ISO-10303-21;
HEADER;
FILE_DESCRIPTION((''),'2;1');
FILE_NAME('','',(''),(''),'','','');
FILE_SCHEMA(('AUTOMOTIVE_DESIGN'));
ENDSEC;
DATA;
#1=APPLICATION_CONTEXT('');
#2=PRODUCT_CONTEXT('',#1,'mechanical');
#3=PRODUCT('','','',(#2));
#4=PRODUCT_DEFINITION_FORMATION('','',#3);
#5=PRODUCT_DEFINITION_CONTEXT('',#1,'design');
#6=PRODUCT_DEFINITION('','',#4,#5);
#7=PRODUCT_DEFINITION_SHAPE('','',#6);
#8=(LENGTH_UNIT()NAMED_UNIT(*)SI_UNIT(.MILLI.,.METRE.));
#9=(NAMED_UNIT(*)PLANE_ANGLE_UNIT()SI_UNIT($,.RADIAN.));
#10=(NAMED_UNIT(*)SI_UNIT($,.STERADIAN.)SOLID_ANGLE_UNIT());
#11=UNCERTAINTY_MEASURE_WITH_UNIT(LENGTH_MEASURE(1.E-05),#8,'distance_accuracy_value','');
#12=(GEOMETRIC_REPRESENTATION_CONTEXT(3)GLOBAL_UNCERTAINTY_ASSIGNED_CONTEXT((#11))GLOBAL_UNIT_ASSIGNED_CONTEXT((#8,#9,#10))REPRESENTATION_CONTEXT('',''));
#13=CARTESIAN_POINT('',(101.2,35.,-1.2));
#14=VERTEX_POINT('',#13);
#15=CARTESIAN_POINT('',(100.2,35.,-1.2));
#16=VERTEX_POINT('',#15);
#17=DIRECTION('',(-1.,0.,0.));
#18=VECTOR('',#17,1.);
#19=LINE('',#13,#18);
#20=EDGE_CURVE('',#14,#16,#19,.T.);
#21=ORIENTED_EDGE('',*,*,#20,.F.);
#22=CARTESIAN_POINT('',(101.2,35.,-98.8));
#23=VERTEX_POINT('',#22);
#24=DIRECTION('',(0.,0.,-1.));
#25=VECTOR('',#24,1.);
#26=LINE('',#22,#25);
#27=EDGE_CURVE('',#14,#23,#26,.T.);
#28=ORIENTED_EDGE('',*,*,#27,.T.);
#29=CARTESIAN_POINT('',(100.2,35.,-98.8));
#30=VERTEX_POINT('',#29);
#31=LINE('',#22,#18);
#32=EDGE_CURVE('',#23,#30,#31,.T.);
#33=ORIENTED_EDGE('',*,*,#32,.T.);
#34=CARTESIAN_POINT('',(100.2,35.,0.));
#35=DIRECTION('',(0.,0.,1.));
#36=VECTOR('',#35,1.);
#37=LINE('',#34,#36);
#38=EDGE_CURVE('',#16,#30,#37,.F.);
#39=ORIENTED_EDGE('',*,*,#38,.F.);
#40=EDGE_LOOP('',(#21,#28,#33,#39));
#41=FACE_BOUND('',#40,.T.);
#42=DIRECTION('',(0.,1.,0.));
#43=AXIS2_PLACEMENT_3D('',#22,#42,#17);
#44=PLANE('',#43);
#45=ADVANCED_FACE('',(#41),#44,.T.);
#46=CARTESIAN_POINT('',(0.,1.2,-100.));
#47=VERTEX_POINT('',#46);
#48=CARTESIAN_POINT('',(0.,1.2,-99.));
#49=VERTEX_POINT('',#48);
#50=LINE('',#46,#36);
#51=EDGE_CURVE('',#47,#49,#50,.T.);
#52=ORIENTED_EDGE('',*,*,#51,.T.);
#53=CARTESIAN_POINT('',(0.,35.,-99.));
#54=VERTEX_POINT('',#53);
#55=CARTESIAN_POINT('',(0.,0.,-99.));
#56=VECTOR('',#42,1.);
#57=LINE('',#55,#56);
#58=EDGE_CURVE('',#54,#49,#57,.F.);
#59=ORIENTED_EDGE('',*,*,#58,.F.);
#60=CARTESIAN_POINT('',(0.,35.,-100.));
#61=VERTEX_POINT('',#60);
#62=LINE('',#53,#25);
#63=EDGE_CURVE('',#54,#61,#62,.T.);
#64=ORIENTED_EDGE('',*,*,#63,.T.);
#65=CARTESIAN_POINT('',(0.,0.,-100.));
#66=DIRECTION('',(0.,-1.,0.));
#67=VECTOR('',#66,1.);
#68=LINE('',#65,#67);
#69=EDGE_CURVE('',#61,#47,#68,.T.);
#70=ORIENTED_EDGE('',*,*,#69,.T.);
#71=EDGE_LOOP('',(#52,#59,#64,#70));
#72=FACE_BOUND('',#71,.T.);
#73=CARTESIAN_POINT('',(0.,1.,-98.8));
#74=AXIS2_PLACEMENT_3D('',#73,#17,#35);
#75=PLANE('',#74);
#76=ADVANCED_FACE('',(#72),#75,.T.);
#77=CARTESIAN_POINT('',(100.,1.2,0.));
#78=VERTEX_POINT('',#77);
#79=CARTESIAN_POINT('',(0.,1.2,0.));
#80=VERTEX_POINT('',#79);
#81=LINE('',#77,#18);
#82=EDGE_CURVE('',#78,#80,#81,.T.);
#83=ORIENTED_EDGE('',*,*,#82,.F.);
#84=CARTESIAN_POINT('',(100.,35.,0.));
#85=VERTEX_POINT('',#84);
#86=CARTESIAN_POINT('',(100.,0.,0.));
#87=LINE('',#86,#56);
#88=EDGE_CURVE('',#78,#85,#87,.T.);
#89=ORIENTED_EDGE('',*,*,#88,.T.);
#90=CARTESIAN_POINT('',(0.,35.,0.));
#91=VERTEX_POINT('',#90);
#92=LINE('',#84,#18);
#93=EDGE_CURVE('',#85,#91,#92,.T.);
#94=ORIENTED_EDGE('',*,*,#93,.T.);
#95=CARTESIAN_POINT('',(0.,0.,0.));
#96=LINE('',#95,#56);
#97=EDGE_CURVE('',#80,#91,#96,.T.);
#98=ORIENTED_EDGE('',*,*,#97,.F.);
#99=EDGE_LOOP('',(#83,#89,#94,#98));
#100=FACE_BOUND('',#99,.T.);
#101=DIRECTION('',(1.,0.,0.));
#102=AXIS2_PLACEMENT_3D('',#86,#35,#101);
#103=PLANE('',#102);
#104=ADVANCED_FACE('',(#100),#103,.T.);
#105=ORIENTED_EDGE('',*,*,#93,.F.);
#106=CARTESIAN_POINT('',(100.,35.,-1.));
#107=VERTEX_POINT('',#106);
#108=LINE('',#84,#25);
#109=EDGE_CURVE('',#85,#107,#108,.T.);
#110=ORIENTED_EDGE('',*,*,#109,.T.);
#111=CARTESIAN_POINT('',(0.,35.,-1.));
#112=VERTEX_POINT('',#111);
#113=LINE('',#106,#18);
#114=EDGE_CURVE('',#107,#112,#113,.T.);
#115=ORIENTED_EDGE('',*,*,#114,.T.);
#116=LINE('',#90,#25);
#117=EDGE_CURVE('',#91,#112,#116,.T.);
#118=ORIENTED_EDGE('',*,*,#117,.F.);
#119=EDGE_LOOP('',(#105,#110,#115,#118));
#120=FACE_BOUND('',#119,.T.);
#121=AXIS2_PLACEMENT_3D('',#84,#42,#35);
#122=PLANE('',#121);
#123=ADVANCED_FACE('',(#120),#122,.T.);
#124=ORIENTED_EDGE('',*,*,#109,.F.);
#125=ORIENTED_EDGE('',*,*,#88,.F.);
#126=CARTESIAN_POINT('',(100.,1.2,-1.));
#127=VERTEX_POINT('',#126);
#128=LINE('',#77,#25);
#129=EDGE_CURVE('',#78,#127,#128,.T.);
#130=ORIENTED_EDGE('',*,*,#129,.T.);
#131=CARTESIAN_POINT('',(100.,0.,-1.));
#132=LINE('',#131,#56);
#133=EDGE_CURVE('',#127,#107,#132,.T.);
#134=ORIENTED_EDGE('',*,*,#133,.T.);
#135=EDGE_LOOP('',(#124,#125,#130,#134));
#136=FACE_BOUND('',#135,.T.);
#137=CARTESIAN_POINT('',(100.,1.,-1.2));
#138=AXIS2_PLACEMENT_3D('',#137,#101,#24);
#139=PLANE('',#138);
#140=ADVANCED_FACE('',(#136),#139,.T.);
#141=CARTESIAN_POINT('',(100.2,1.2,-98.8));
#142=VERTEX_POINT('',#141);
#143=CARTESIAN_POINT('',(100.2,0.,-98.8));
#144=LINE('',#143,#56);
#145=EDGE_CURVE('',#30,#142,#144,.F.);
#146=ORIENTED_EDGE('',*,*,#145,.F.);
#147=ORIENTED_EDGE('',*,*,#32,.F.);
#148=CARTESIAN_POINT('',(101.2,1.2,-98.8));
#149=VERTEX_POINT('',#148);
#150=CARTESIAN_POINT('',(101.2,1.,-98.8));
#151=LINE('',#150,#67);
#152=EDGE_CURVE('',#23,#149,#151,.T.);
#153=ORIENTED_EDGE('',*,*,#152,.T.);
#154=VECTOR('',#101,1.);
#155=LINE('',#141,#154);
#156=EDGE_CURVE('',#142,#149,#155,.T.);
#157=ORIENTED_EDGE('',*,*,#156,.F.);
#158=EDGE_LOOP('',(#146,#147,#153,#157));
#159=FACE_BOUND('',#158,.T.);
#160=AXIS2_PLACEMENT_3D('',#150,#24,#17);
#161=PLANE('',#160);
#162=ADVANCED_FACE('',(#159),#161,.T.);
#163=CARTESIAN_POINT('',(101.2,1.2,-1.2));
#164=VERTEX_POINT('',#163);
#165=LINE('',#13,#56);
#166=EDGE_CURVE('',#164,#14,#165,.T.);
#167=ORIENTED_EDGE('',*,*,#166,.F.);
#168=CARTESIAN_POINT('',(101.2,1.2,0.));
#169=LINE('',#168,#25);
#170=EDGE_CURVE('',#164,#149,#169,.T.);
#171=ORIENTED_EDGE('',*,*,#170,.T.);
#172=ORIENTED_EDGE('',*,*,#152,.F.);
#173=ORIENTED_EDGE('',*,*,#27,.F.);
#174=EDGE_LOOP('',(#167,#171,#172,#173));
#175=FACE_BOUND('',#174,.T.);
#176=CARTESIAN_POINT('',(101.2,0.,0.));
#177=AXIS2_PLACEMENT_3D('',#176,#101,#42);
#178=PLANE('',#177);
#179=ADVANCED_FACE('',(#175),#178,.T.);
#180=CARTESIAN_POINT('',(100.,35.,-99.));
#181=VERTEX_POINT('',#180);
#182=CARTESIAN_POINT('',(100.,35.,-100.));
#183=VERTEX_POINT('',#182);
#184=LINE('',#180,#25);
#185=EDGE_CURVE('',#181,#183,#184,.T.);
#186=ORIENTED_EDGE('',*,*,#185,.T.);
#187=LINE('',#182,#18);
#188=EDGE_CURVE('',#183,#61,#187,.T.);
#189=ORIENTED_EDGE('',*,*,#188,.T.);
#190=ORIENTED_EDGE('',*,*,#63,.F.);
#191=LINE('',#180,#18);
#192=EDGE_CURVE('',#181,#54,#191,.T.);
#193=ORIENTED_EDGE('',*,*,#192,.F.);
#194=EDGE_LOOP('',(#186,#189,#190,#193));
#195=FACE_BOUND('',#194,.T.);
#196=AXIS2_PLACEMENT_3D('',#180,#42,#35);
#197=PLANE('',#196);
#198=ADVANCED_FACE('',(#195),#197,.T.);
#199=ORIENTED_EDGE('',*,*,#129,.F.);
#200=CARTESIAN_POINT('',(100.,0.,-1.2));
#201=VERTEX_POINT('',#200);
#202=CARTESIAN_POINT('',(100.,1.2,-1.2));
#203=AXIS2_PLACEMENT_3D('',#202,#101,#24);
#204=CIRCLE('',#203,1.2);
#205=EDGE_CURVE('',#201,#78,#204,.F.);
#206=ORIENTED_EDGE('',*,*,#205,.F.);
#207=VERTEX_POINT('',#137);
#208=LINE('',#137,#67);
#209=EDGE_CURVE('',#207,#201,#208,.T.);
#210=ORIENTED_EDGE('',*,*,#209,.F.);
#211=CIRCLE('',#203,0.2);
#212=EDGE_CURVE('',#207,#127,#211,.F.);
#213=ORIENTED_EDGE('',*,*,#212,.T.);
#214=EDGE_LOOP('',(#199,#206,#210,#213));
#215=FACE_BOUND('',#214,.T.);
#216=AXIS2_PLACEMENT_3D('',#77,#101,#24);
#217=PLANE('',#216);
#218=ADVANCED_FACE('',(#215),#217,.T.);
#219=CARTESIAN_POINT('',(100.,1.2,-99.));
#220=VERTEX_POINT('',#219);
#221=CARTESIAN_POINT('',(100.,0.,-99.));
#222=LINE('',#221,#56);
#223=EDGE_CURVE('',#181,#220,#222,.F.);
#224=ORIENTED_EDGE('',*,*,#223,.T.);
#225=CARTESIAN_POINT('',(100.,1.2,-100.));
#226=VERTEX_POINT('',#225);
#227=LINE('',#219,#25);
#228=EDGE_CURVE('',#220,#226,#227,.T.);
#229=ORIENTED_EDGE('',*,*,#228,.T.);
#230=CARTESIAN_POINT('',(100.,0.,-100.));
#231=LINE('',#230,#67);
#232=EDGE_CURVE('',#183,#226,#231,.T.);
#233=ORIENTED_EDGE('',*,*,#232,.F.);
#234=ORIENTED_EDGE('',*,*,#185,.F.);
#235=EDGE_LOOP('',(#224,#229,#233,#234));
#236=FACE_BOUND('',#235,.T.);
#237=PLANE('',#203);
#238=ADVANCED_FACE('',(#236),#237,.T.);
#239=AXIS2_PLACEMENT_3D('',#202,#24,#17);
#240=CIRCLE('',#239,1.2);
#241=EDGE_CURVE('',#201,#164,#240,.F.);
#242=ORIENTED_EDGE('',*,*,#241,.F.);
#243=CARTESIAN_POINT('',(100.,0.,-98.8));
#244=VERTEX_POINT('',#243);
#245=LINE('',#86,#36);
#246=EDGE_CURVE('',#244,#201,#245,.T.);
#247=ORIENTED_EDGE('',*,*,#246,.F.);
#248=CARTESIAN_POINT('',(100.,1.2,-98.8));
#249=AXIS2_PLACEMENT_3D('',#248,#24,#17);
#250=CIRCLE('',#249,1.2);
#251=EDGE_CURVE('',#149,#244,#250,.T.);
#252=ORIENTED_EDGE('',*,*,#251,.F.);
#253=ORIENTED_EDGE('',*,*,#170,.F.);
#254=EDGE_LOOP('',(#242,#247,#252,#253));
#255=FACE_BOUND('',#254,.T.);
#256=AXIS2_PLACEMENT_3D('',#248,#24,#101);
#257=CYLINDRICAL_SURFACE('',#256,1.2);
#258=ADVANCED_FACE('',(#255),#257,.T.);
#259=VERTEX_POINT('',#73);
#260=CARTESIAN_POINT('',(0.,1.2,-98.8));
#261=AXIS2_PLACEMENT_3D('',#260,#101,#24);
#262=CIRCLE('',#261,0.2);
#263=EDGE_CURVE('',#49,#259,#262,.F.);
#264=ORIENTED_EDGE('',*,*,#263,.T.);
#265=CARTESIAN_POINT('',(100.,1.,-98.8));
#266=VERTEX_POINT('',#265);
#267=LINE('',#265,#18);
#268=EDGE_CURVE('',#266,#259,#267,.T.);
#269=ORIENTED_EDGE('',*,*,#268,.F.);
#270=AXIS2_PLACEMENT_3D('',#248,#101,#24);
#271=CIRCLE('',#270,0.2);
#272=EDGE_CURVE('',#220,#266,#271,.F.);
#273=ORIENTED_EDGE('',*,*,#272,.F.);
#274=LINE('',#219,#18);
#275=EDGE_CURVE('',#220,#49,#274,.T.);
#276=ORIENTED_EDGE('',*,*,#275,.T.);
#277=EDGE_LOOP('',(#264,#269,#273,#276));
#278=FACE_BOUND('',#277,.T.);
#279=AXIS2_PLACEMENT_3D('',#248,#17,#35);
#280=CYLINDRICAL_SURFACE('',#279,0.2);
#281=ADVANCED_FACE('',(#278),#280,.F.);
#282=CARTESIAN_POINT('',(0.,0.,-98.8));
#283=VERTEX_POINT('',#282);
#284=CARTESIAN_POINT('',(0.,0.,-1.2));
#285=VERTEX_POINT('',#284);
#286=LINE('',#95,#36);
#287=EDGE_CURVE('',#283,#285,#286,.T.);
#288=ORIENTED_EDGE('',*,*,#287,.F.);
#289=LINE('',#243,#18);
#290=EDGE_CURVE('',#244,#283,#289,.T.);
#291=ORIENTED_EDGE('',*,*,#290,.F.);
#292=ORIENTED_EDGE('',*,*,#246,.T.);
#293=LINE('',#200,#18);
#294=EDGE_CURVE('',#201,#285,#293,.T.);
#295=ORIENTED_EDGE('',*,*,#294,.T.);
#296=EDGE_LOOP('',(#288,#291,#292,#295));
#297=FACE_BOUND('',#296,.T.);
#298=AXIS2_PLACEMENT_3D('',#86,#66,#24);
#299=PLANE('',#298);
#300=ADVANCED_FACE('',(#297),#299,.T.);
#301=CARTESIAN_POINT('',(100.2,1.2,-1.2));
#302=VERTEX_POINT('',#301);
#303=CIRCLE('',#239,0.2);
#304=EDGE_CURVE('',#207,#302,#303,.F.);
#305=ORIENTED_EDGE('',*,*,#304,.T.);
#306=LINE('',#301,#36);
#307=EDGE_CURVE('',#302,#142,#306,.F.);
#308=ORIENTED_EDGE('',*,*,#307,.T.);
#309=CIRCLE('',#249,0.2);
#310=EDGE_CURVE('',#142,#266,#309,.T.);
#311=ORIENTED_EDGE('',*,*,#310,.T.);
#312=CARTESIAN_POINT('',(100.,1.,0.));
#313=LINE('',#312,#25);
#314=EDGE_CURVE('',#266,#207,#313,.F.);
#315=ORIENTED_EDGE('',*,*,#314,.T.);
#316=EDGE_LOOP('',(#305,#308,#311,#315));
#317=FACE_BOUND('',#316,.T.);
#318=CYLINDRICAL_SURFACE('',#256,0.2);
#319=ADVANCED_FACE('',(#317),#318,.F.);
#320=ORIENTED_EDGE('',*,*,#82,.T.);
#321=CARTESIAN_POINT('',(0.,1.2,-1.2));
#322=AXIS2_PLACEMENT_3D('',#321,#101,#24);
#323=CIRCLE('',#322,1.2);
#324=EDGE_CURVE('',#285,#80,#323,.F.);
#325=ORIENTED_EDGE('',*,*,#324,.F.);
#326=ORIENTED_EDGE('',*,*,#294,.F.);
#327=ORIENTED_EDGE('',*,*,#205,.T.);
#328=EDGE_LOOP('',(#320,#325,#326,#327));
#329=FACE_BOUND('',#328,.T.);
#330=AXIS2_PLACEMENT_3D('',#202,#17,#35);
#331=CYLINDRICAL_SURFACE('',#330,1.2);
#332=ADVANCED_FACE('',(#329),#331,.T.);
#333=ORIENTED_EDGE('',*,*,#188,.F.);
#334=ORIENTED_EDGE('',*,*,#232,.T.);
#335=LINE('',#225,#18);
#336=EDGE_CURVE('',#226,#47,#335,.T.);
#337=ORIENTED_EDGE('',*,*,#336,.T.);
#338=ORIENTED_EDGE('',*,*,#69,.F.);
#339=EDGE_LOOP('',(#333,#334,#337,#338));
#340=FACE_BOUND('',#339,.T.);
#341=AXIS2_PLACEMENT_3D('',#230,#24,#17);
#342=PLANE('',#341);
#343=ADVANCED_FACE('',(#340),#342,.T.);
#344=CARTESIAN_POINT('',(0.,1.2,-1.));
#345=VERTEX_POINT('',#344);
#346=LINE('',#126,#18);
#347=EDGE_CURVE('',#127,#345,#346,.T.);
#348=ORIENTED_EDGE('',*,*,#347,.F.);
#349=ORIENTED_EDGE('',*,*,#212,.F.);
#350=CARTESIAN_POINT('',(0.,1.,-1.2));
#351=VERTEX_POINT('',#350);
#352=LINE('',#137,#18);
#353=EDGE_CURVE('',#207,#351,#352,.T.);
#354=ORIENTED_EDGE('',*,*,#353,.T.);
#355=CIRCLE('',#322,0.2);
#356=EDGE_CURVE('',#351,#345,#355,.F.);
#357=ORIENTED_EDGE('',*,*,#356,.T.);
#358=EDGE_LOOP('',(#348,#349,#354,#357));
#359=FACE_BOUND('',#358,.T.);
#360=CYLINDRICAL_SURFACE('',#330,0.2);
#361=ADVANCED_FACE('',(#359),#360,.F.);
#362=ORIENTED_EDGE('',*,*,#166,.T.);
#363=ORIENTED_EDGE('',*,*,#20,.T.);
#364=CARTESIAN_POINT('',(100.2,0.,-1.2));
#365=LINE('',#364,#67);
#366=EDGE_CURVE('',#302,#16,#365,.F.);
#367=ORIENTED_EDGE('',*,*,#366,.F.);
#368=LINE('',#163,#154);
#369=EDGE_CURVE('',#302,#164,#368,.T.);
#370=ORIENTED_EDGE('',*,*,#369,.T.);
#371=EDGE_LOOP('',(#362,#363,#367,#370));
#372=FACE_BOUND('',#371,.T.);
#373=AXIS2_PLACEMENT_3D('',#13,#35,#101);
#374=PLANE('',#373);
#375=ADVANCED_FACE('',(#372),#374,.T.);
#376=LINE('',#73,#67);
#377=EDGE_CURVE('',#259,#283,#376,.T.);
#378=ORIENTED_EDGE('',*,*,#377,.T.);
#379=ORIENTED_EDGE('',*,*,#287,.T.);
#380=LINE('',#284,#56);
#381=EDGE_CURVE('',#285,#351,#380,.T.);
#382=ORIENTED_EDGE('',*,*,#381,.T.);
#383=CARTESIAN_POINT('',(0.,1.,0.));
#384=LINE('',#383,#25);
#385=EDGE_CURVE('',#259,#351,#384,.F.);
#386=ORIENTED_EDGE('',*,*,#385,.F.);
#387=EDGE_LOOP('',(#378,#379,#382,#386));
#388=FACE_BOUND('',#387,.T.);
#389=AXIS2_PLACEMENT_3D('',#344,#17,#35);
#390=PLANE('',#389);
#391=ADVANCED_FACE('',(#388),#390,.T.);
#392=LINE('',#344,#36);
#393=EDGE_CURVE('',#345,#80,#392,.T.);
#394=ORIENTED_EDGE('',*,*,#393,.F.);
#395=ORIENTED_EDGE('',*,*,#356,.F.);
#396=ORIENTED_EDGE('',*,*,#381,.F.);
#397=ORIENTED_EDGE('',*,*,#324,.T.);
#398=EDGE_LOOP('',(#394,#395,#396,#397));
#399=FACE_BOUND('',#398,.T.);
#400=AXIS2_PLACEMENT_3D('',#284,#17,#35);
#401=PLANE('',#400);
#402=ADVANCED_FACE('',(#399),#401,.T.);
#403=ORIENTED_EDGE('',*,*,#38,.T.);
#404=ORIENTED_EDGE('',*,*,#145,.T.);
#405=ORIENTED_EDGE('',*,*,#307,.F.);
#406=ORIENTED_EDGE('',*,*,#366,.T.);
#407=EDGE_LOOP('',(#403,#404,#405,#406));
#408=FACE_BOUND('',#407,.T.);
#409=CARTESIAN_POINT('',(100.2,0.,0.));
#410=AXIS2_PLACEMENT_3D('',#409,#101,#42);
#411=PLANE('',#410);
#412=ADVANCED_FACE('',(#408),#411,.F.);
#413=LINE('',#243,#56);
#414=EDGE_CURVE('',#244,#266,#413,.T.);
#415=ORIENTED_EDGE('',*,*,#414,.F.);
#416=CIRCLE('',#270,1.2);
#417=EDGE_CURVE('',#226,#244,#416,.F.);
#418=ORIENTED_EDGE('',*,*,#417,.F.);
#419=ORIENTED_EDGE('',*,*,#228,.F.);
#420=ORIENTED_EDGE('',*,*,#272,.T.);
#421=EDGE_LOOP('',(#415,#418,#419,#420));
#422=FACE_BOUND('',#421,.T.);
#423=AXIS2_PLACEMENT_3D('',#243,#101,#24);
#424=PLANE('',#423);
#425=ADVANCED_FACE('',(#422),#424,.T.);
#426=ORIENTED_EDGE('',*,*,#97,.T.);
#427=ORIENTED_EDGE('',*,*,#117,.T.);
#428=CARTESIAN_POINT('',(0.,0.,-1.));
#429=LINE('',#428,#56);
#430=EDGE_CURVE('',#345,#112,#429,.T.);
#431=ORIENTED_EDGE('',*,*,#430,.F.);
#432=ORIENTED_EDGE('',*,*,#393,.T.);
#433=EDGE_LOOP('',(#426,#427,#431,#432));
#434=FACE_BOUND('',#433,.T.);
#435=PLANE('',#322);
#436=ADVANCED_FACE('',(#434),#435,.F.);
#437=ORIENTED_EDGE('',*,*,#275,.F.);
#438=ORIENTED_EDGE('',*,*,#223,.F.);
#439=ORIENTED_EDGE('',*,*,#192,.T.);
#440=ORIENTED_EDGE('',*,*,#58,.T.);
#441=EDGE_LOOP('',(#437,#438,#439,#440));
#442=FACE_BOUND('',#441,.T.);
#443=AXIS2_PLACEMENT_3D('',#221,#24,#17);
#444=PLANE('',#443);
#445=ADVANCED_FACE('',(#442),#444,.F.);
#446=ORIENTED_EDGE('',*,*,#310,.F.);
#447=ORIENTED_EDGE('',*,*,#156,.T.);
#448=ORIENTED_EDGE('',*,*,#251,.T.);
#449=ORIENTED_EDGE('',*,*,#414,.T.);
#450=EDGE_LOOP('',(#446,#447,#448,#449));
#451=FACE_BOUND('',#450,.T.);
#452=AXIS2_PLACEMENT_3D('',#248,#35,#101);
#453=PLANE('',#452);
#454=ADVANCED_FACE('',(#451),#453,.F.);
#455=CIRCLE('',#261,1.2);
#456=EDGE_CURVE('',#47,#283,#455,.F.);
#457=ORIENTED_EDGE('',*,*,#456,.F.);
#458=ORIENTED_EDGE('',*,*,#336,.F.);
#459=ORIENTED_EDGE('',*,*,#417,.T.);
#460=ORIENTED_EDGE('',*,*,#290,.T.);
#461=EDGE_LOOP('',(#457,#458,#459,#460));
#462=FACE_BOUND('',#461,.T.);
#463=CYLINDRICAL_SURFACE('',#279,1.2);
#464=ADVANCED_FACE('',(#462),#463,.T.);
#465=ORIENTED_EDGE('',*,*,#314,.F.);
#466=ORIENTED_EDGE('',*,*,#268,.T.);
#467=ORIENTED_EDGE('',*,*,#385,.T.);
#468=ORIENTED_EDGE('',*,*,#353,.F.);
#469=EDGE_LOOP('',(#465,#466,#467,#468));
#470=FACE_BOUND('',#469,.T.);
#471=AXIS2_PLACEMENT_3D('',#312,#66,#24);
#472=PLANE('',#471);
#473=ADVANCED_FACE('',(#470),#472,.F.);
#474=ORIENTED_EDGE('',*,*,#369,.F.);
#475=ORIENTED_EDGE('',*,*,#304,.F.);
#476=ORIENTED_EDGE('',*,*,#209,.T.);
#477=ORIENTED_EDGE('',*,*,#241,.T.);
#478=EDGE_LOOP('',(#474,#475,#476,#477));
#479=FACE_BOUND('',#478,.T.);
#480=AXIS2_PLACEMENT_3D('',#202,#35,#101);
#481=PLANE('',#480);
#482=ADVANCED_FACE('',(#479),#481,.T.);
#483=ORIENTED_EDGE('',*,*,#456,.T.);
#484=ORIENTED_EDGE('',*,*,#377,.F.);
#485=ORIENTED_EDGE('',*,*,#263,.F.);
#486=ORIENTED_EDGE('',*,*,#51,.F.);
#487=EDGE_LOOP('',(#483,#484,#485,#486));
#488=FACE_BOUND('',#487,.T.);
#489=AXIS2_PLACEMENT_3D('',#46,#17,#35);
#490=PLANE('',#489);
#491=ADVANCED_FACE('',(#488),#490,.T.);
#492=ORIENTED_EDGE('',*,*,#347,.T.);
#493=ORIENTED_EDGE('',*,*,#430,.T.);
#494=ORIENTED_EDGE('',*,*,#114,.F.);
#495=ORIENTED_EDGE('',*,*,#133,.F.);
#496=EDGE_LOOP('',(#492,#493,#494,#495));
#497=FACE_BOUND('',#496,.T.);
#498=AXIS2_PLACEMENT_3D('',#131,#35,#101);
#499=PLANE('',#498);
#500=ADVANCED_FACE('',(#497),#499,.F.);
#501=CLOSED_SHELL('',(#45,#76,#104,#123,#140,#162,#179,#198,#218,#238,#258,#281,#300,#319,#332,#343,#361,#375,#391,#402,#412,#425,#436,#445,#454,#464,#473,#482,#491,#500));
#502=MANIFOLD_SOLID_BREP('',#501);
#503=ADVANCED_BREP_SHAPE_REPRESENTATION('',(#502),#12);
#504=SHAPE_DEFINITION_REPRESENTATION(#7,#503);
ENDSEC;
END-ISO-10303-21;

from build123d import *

# Parameters (mm, degrees)
SM_BASE_FLANGE_1_DEPTH = 100
SM_EDGE_FLANGE_1_DEPTH = 97.6


# Sheet-metal steps are written as plain solids
with BuildPart() as part:
    # Sketch 1 → 基体-法兰1 (new body)
    with BuildSketch(Plane(origin=(0, 0, 0), x_dir=(0, 0, -1), z_dir=(1, 0, 0))):
        with BuildLine():
            Line((0, 35), (0, 1.2))
            ThreePointArc((0, 1.2), (0.351471863, 0.351471863), (1.2, 0))
            Line((1.2, 0), (98.8, 0))
            ThreePointArc((98.8, 0), (99.648528137, 0.351471863), (100, 1.2))
            Line((100, 1.2), (100, 35))
            Line((100, 35), (99, 35))
            Line((99, 35), (99, 1.2))
            ThreePointArc((99, 1.2), (98.941421356, 1.058578644), (98.8, 1))
            Line((98.8, 1), (1.2, 1))
            ThreePointArc((1.2, 1), (1.058578644, 1.058578644), (1, 1.2))
            Line((1, 1.2), (1, 35))
            Line((1, 35), (0, 35))
        make_face()
    extrude(amount=SM_BASE_FLANGE_1_DEPTH)

    # 边线-法兰1 section (across the edge) → 边线-法兰1 (add)
    with BuildSketch(Plane(origin=(100.2, 1, -1.2), x_dir=(-1, 0, 0), z_dir=(0, 0, -1))):
        with BuildLine():
            Line((-1, 0.2), (-1, 34))
            Line((-1, 34), (0, 34))
            Line((0, 34), (0, 0.2))
            ThreePointArc((0, 0.2), (0.058578644, 0.058578644), (0.2, 0))
            Line((0.2, 0), (0.2, -1))
            ThreePointArc((0.2, -1), (-0.648528137, -0.648528137), (-1, 0.2))
        make_face()
    extrude(amount=SM_EDGE_FLANGE_1_DEPTH)


solid = part.part
